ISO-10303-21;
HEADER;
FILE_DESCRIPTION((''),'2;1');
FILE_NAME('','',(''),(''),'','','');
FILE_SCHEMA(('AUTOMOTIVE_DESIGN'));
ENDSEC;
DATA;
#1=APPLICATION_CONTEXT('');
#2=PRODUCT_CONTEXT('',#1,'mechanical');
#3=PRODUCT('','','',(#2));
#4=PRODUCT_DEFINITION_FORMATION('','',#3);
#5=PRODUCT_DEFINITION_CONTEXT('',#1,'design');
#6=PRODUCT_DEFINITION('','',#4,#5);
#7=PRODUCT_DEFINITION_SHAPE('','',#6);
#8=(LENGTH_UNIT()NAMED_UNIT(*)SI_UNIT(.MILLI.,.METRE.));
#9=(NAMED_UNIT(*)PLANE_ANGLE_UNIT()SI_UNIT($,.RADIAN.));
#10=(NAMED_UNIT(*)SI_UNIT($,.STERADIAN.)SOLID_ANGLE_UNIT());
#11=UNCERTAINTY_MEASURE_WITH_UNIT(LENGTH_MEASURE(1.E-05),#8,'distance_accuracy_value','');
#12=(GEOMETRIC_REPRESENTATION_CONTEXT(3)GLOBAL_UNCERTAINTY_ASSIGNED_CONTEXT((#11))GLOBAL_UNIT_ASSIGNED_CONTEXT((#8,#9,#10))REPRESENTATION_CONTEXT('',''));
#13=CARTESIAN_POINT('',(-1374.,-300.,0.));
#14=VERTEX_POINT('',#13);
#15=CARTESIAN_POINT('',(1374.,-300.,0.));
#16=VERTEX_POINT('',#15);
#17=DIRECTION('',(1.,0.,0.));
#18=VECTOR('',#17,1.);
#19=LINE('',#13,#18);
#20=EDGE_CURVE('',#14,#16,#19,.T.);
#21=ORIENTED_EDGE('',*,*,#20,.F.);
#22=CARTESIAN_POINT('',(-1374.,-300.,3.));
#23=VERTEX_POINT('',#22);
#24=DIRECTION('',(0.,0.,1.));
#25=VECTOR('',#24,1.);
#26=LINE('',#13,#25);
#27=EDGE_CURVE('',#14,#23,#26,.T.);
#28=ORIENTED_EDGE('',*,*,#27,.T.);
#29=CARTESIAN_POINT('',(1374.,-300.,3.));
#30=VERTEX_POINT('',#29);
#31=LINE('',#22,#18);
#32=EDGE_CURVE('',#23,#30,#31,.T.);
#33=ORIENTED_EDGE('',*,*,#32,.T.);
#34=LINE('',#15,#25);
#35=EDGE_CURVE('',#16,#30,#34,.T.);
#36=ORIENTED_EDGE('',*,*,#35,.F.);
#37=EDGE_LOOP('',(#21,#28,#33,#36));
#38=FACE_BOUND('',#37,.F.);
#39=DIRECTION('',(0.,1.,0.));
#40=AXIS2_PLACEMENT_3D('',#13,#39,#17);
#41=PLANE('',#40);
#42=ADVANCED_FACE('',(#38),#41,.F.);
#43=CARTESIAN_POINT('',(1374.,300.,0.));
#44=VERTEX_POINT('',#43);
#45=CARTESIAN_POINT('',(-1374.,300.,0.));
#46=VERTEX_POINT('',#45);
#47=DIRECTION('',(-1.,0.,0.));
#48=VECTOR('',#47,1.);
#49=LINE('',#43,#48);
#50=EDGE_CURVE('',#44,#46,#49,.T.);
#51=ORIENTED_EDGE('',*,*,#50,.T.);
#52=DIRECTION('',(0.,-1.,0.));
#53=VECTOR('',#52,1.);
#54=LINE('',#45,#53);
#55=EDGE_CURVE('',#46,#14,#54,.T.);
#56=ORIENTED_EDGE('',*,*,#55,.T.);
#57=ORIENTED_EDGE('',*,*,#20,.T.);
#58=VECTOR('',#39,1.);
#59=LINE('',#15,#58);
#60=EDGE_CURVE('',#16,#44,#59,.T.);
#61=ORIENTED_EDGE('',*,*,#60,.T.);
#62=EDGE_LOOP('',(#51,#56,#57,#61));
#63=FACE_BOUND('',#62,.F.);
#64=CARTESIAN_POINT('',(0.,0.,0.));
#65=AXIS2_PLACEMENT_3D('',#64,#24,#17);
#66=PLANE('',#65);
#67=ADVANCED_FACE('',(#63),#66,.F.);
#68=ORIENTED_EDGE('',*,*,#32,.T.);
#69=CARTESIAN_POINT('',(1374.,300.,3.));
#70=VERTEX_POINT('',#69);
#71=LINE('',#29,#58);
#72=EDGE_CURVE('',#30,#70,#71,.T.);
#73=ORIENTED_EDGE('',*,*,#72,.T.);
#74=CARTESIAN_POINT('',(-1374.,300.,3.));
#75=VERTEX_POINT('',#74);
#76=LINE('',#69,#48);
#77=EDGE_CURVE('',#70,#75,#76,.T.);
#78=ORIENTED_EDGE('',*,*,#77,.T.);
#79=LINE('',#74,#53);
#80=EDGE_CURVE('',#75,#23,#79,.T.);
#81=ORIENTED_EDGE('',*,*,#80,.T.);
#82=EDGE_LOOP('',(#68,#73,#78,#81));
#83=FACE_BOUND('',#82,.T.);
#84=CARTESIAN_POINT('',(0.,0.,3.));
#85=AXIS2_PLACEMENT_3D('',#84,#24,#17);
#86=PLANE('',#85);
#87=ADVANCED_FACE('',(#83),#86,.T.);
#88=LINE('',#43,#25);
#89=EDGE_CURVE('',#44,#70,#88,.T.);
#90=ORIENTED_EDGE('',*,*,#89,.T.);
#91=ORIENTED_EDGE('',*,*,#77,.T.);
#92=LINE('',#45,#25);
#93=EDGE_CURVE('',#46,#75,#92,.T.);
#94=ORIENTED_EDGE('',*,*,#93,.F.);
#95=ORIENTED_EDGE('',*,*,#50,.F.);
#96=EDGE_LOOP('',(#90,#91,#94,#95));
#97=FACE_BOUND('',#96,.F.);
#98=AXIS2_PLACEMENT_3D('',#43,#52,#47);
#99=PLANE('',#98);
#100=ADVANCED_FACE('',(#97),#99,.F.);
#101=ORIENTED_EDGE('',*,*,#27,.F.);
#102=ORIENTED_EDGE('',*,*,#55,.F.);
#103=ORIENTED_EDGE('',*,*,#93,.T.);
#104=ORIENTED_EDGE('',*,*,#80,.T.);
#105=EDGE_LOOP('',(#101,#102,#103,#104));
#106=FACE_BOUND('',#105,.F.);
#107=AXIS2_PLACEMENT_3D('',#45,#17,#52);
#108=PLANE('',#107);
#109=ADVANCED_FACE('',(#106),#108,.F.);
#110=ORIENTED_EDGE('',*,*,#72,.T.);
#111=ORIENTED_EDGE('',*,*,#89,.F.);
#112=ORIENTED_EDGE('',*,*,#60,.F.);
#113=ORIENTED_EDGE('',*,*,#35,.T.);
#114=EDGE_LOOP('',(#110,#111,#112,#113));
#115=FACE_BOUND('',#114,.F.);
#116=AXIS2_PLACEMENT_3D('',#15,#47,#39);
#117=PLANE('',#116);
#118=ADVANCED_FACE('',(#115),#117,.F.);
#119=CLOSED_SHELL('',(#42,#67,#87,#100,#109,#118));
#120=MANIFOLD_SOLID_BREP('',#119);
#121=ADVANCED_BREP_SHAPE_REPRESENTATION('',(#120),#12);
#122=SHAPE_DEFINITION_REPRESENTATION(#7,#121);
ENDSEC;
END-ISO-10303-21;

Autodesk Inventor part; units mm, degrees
ref_plane "YZ Plane" through (0, 0, 0) normal (1, 0, 0) x (0, 1, 0)
ref_plane "XZ Plane" through (0, 0, 0) normal (0, 1, 0) x (-1, 0, 0)
ref_plane "XY Plane" through (0, 0, 0) normal (0, 0, 1) x (1, 0, 0)
sketch "Sketch1" plane through (0, 0, 0) normal (0, 0, 1) x (1, 0, 0)
  line L0 (-1374, -300) -> (1374, -300)
  line L1 (1374, -300) -> (1374, 300)
  line L2 (1374, 300) -> (-1374, 300)
  line L3 (-1374, 300) -> (-1374, -300)
  line L4 (-1374, -300) -> (1374, 300) construction
  line L5 (1374, -300) -> (-1374, 300) construction
  point P0 (0, 0)
  dimension "d0" = 2748
  dimension "d1" = 600
extrude "Plate1" add sketch "Sketch1" along normal blind 3
sketch "Sketch5" plane through (0, 0, 3) normal (0, 0, 1) x (1, 0, 0)
  line L0 (1349, 275) -> (1349, 75) construction
  line L1 (1349, 75) -> (1334, 75) construction
  line L2 (1334, 75) -> (1334, 275) construction
  line L3 (1334, 275) -> (1349, 275) construction
  line L4 (-1374, -300) -> (-1374, 300) projected
  line L5 (1374, -300) -> (-1374, -300) projected
  line L6 (-1374, 300) -> (1374, 300) projected
  line L7 (1374, 300) -> (1374, -300) projected
  point P0 (0, 0)
  dimension "d28" = 200
  dimension "d29" = 15
  dimension "d30" = 25
  dimension "d31" = 25
mark "Mark1"
equation "\"d2\" = Thickness"
equation "\"BendReliefWidth\" = Thickness"
equation "\"BendReliefDepth\" = 0.5 * Thickness"
equation "\"CornerReliefSize\" = 4 * Thickness"
equation "\"MinimumRemnant\" = 2 * Thickness"
equation "\"TransitionRadius\" = BendRadius"
equation "\"JacobiRadiusSize\" = BendRadius"
equation "\"GapSize\" = Thickness"
equation "\"Thickness\" = 3"
equation "\"BendRadius\" = 5"
properties part number "BSH 033 board 3" material "09g2s"
